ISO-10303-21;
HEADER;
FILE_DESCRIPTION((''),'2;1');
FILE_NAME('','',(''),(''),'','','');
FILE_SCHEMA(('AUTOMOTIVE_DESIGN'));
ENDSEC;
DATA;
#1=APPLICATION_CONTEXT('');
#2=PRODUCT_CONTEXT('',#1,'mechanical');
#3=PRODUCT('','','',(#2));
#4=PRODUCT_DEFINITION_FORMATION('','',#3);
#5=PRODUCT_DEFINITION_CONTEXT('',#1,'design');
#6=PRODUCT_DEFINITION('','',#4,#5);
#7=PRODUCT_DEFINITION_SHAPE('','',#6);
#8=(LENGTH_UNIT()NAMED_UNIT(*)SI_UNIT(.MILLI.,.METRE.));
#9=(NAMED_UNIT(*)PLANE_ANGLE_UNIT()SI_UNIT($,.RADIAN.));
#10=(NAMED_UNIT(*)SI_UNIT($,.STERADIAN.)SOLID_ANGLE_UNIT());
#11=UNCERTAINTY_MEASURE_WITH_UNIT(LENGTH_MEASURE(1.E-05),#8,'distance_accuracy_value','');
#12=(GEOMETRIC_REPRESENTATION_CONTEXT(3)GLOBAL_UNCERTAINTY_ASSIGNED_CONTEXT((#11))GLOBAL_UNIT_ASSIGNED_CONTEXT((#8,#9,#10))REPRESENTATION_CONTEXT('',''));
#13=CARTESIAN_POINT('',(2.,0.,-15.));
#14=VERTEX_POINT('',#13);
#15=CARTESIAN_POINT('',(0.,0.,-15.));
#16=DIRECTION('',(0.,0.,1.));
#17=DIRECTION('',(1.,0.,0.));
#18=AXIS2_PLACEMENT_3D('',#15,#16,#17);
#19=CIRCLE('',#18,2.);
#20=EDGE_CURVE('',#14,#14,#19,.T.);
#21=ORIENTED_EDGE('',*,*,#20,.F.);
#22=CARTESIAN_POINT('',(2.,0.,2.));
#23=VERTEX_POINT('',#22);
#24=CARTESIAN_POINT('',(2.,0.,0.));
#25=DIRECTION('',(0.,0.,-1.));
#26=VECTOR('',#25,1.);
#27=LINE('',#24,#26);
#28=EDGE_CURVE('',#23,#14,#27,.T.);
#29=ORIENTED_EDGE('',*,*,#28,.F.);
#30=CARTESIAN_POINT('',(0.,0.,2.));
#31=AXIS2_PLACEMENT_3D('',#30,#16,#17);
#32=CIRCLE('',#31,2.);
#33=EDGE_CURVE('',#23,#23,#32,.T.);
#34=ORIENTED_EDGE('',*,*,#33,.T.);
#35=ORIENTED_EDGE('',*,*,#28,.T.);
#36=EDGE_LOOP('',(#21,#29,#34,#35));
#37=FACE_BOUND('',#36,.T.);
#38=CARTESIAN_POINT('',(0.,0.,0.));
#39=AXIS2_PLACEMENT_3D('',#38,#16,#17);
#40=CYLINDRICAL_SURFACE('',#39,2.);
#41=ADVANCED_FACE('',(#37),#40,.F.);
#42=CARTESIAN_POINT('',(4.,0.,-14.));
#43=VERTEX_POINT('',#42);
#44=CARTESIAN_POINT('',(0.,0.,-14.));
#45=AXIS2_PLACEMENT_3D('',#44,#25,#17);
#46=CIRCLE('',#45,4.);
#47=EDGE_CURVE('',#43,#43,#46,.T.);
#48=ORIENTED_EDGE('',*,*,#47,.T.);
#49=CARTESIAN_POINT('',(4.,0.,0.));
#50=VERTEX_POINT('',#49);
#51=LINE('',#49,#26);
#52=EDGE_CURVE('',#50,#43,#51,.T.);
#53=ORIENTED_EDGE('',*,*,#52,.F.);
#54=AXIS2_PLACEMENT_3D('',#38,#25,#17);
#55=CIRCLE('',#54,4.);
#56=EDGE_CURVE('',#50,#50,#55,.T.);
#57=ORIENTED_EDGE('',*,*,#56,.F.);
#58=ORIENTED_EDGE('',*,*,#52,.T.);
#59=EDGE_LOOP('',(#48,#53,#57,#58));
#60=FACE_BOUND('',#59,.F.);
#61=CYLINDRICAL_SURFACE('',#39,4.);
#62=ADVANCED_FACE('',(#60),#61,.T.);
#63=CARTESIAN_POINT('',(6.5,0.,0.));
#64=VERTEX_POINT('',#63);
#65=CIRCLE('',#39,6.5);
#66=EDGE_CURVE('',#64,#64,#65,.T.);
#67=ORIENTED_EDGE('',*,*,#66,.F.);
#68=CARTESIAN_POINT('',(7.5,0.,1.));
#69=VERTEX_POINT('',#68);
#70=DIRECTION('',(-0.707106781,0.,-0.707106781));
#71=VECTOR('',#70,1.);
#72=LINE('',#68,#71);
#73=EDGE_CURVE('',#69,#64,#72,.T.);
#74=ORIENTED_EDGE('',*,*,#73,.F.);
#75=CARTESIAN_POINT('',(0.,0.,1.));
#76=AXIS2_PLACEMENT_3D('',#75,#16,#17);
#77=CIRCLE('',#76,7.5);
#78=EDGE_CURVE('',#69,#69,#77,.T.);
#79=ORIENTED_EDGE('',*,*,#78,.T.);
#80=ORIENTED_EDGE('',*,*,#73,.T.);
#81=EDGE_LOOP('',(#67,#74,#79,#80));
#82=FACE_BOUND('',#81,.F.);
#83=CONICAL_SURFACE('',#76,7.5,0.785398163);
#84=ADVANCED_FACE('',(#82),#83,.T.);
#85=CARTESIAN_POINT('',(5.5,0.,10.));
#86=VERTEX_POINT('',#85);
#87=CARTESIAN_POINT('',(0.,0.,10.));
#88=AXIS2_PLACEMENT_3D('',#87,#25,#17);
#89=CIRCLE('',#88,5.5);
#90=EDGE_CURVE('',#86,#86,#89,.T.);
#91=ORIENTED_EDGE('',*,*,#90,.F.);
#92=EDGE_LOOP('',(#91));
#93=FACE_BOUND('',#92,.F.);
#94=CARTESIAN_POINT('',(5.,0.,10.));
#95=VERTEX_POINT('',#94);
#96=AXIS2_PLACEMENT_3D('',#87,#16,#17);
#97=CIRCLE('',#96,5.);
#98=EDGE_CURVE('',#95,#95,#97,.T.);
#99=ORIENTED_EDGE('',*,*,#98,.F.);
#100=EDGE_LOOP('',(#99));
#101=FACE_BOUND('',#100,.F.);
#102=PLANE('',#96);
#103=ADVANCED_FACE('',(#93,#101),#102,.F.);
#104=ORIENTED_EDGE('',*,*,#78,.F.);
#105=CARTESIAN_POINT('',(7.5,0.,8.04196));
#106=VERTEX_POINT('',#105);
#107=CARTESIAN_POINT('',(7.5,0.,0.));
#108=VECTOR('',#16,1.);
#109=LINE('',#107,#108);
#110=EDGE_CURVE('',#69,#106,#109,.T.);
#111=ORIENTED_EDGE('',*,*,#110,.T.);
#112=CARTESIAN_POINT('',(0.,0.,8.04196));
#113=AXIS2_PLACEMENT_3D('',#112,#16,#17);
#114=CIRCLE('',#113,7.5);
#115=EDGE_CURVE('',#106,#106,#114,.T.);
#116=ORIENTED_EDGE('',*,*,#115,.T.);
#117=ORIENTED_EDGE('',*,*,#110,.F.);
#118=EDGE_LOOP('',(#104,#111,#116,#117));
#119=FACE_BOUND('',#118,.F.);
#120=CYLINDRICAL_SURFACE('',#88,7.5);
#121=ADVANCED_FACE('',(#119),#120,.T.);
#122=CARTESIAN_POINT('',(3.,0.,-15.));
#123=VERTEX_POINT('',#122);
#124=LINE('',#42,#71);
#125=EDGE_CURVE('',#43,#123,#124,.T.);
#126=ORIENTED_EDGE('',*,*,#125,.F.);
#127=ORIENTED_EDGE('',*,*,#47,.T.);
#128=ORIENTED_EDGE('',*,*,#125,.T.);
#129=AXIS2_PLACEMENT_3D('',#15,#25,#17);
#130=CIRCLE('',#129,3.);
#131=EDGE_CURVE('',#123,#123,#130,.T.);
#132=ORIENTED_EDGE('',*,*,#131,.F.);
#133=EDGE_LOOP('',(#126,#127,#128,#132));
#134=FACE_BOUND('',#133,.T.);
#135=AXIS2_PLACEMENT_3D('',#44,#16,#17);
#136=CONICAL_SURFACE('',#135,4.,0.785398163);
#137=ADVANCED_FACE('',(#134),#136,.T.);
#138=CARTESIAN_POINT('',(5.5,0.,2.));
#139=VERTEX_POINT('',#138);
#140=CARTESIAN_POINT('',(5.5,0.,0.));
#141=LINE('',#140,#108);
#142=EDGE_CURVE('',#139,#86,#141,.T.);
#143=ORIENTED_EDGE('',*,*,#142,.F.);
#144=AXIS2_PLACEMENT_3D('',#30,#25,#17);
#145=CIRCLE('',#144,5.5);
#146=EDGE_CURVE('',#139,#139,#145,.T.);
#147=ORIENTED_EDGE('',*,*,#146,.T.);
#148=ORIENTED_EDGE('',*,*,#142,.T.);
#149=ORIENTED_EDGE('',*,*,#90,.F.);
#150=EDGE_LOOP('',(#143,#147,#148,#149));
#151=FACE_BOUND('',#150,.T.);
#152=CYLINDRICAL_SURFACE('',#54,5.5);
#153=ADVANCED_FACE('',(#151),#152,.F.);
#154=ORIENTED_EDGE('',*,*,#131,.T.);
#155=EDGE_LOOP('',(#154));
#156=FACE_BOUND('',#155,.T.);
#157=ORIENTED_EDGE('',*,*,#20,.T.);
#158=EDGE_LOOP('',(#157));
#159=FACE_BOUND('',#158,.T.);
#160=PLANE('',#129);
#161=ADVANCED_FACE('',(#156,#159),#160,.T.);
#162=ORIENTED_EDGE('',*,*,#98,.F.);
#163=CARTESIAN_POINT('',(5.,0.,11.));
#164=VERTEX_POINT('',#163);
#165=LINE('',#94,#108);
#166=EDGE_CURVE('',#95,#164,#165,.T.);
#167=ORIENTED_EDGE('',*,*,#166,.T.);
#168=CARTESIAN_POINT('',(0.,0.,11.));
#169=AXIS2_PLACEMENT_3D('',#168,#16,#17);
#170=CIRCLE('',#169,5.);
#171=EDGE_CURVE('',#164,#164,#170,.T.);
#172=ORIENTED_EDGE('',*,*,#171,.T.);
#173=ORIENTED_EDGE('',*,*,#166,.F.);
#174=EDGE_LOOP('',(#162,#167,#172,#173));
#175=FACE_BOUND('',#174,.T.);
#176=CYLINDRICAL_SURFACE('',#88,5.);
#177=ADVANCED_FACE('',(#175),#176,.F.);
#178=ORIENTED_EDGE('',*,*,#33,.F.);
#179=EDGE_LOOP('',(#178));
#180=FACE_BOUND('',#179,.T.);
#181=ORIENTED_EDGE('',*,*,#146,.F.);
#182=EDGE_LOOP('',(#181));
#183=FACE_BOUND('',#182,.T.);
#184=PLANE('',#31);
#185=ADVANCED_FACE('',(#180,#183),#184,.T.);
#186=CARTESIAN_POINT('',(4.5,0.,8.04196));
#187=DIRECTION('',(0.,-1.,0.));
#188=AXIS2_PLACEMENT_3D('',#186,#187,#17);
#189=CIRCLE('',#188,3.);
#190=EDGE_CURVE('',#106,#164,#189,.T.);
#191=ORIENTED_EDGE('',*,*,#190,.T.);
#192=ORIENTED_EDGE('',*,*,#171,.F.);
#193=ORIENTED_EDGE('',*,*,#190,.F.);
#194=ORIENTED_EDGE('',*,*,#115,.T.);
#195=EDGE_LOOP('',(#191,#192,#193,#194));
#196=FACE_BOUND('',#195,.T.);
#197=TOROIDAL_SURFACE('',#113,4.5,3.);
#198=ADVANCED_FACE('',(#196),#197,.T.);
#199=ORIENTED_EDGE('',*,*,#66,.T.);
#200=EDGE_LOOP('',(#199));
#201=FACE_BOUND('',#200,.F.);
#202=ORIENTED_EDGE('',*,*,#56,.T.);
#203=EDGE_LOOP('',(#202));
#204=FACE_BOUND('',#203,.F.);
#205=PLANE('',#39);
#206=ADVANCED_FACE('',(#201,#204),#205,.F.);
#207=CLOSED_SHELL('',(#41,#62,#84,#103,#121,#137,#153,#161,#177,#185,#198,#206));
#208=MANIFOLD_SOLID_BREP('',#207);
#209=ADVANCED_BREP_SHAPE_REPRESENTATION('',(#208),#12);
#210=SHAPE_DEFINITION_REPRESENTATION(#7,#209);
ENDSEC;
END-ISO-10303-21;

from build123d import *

# Parameters (mm, degrees)
F0_R     = 7.5
F1_DEPTH = 10
F2_R     = 4
F3_DEPTH = 15
F4_T     = -2
F5_R     = 7.5
F5_R_2   = 5
F6_DEPTH = 1
F8_SIZE  = 1
F9_SIZE  = 1


# Not quite as in the source:
# - a fillet or chamfer that OpenCascade refuses, or shapes differently, is made with other operations: its cross-section is extruded or revolved along the edge and cut away or added


with BuildPart() as f1:
    # F0 (on Top) → F1 (new body)
    with BuildSketch(Plane.XY):
        Circle(F0_R)
    extrude(amount=F1_DEPTH)

    # F2 (on face) → F3 (join)
    with BuildSketch(Plane(origin=(0, 0, 0), x_dir=(1, 0, 0), z_dir=(0, 0, -1))):
        Circle(F2_R)
    extrude(amount=F3_DEPTH)

    # F4
    f4_openings = [f1.faces().sort_by_distance(p)[0] for p in [
        (0, 0, 10),
        (0, 0, -15),
    ]]
    offset(amount=F4_T, openings=f4_openings, kind=Kind.INTERSECTION)

    # F5 (on face) → F6 (join)
    with BuildSketch(Plane.XY.offset(10)):
        Circle(F5_R)
        Circle(F5_R_2, mode=Mode.SUBTRACT)
    extrude(amount=F6_DEPTH)

    # F7: fillet of radius 3 on 1 edges, made by hand

    # F7_s1 → F7_t2 (revolve, cut)
    with BuildSketch(Plane.XZ):
        with BuildLine():
            ThreePointArc((7.5, 8.0419601084), (6.7912878475, 9.9784517816), (5, 11))
            Line((5, 11), (7.5, 11))
            Line((7.5, 11), (7.5, 8.0419601084))
        make_face()
    revolve(axis=Axis((0, 0, 11), (0, 0, 1)), mode=Mode.SUBTRACT)

    # F8
    f8_edges = [f1.edges().sort_by_distance(p)[0] for p in [
        (-7.5, 0, 0),
    ]]
    chamfer(f8_edges, length=F8_SIZE)

    # F9
    f9_edges = [f1.edges().sort_by_distance(p)[0] for p in [
        (-4, 0, -15),
    ]]
    chamfer(f9_edges, length=F9_SIZE)


solid = f1.part
